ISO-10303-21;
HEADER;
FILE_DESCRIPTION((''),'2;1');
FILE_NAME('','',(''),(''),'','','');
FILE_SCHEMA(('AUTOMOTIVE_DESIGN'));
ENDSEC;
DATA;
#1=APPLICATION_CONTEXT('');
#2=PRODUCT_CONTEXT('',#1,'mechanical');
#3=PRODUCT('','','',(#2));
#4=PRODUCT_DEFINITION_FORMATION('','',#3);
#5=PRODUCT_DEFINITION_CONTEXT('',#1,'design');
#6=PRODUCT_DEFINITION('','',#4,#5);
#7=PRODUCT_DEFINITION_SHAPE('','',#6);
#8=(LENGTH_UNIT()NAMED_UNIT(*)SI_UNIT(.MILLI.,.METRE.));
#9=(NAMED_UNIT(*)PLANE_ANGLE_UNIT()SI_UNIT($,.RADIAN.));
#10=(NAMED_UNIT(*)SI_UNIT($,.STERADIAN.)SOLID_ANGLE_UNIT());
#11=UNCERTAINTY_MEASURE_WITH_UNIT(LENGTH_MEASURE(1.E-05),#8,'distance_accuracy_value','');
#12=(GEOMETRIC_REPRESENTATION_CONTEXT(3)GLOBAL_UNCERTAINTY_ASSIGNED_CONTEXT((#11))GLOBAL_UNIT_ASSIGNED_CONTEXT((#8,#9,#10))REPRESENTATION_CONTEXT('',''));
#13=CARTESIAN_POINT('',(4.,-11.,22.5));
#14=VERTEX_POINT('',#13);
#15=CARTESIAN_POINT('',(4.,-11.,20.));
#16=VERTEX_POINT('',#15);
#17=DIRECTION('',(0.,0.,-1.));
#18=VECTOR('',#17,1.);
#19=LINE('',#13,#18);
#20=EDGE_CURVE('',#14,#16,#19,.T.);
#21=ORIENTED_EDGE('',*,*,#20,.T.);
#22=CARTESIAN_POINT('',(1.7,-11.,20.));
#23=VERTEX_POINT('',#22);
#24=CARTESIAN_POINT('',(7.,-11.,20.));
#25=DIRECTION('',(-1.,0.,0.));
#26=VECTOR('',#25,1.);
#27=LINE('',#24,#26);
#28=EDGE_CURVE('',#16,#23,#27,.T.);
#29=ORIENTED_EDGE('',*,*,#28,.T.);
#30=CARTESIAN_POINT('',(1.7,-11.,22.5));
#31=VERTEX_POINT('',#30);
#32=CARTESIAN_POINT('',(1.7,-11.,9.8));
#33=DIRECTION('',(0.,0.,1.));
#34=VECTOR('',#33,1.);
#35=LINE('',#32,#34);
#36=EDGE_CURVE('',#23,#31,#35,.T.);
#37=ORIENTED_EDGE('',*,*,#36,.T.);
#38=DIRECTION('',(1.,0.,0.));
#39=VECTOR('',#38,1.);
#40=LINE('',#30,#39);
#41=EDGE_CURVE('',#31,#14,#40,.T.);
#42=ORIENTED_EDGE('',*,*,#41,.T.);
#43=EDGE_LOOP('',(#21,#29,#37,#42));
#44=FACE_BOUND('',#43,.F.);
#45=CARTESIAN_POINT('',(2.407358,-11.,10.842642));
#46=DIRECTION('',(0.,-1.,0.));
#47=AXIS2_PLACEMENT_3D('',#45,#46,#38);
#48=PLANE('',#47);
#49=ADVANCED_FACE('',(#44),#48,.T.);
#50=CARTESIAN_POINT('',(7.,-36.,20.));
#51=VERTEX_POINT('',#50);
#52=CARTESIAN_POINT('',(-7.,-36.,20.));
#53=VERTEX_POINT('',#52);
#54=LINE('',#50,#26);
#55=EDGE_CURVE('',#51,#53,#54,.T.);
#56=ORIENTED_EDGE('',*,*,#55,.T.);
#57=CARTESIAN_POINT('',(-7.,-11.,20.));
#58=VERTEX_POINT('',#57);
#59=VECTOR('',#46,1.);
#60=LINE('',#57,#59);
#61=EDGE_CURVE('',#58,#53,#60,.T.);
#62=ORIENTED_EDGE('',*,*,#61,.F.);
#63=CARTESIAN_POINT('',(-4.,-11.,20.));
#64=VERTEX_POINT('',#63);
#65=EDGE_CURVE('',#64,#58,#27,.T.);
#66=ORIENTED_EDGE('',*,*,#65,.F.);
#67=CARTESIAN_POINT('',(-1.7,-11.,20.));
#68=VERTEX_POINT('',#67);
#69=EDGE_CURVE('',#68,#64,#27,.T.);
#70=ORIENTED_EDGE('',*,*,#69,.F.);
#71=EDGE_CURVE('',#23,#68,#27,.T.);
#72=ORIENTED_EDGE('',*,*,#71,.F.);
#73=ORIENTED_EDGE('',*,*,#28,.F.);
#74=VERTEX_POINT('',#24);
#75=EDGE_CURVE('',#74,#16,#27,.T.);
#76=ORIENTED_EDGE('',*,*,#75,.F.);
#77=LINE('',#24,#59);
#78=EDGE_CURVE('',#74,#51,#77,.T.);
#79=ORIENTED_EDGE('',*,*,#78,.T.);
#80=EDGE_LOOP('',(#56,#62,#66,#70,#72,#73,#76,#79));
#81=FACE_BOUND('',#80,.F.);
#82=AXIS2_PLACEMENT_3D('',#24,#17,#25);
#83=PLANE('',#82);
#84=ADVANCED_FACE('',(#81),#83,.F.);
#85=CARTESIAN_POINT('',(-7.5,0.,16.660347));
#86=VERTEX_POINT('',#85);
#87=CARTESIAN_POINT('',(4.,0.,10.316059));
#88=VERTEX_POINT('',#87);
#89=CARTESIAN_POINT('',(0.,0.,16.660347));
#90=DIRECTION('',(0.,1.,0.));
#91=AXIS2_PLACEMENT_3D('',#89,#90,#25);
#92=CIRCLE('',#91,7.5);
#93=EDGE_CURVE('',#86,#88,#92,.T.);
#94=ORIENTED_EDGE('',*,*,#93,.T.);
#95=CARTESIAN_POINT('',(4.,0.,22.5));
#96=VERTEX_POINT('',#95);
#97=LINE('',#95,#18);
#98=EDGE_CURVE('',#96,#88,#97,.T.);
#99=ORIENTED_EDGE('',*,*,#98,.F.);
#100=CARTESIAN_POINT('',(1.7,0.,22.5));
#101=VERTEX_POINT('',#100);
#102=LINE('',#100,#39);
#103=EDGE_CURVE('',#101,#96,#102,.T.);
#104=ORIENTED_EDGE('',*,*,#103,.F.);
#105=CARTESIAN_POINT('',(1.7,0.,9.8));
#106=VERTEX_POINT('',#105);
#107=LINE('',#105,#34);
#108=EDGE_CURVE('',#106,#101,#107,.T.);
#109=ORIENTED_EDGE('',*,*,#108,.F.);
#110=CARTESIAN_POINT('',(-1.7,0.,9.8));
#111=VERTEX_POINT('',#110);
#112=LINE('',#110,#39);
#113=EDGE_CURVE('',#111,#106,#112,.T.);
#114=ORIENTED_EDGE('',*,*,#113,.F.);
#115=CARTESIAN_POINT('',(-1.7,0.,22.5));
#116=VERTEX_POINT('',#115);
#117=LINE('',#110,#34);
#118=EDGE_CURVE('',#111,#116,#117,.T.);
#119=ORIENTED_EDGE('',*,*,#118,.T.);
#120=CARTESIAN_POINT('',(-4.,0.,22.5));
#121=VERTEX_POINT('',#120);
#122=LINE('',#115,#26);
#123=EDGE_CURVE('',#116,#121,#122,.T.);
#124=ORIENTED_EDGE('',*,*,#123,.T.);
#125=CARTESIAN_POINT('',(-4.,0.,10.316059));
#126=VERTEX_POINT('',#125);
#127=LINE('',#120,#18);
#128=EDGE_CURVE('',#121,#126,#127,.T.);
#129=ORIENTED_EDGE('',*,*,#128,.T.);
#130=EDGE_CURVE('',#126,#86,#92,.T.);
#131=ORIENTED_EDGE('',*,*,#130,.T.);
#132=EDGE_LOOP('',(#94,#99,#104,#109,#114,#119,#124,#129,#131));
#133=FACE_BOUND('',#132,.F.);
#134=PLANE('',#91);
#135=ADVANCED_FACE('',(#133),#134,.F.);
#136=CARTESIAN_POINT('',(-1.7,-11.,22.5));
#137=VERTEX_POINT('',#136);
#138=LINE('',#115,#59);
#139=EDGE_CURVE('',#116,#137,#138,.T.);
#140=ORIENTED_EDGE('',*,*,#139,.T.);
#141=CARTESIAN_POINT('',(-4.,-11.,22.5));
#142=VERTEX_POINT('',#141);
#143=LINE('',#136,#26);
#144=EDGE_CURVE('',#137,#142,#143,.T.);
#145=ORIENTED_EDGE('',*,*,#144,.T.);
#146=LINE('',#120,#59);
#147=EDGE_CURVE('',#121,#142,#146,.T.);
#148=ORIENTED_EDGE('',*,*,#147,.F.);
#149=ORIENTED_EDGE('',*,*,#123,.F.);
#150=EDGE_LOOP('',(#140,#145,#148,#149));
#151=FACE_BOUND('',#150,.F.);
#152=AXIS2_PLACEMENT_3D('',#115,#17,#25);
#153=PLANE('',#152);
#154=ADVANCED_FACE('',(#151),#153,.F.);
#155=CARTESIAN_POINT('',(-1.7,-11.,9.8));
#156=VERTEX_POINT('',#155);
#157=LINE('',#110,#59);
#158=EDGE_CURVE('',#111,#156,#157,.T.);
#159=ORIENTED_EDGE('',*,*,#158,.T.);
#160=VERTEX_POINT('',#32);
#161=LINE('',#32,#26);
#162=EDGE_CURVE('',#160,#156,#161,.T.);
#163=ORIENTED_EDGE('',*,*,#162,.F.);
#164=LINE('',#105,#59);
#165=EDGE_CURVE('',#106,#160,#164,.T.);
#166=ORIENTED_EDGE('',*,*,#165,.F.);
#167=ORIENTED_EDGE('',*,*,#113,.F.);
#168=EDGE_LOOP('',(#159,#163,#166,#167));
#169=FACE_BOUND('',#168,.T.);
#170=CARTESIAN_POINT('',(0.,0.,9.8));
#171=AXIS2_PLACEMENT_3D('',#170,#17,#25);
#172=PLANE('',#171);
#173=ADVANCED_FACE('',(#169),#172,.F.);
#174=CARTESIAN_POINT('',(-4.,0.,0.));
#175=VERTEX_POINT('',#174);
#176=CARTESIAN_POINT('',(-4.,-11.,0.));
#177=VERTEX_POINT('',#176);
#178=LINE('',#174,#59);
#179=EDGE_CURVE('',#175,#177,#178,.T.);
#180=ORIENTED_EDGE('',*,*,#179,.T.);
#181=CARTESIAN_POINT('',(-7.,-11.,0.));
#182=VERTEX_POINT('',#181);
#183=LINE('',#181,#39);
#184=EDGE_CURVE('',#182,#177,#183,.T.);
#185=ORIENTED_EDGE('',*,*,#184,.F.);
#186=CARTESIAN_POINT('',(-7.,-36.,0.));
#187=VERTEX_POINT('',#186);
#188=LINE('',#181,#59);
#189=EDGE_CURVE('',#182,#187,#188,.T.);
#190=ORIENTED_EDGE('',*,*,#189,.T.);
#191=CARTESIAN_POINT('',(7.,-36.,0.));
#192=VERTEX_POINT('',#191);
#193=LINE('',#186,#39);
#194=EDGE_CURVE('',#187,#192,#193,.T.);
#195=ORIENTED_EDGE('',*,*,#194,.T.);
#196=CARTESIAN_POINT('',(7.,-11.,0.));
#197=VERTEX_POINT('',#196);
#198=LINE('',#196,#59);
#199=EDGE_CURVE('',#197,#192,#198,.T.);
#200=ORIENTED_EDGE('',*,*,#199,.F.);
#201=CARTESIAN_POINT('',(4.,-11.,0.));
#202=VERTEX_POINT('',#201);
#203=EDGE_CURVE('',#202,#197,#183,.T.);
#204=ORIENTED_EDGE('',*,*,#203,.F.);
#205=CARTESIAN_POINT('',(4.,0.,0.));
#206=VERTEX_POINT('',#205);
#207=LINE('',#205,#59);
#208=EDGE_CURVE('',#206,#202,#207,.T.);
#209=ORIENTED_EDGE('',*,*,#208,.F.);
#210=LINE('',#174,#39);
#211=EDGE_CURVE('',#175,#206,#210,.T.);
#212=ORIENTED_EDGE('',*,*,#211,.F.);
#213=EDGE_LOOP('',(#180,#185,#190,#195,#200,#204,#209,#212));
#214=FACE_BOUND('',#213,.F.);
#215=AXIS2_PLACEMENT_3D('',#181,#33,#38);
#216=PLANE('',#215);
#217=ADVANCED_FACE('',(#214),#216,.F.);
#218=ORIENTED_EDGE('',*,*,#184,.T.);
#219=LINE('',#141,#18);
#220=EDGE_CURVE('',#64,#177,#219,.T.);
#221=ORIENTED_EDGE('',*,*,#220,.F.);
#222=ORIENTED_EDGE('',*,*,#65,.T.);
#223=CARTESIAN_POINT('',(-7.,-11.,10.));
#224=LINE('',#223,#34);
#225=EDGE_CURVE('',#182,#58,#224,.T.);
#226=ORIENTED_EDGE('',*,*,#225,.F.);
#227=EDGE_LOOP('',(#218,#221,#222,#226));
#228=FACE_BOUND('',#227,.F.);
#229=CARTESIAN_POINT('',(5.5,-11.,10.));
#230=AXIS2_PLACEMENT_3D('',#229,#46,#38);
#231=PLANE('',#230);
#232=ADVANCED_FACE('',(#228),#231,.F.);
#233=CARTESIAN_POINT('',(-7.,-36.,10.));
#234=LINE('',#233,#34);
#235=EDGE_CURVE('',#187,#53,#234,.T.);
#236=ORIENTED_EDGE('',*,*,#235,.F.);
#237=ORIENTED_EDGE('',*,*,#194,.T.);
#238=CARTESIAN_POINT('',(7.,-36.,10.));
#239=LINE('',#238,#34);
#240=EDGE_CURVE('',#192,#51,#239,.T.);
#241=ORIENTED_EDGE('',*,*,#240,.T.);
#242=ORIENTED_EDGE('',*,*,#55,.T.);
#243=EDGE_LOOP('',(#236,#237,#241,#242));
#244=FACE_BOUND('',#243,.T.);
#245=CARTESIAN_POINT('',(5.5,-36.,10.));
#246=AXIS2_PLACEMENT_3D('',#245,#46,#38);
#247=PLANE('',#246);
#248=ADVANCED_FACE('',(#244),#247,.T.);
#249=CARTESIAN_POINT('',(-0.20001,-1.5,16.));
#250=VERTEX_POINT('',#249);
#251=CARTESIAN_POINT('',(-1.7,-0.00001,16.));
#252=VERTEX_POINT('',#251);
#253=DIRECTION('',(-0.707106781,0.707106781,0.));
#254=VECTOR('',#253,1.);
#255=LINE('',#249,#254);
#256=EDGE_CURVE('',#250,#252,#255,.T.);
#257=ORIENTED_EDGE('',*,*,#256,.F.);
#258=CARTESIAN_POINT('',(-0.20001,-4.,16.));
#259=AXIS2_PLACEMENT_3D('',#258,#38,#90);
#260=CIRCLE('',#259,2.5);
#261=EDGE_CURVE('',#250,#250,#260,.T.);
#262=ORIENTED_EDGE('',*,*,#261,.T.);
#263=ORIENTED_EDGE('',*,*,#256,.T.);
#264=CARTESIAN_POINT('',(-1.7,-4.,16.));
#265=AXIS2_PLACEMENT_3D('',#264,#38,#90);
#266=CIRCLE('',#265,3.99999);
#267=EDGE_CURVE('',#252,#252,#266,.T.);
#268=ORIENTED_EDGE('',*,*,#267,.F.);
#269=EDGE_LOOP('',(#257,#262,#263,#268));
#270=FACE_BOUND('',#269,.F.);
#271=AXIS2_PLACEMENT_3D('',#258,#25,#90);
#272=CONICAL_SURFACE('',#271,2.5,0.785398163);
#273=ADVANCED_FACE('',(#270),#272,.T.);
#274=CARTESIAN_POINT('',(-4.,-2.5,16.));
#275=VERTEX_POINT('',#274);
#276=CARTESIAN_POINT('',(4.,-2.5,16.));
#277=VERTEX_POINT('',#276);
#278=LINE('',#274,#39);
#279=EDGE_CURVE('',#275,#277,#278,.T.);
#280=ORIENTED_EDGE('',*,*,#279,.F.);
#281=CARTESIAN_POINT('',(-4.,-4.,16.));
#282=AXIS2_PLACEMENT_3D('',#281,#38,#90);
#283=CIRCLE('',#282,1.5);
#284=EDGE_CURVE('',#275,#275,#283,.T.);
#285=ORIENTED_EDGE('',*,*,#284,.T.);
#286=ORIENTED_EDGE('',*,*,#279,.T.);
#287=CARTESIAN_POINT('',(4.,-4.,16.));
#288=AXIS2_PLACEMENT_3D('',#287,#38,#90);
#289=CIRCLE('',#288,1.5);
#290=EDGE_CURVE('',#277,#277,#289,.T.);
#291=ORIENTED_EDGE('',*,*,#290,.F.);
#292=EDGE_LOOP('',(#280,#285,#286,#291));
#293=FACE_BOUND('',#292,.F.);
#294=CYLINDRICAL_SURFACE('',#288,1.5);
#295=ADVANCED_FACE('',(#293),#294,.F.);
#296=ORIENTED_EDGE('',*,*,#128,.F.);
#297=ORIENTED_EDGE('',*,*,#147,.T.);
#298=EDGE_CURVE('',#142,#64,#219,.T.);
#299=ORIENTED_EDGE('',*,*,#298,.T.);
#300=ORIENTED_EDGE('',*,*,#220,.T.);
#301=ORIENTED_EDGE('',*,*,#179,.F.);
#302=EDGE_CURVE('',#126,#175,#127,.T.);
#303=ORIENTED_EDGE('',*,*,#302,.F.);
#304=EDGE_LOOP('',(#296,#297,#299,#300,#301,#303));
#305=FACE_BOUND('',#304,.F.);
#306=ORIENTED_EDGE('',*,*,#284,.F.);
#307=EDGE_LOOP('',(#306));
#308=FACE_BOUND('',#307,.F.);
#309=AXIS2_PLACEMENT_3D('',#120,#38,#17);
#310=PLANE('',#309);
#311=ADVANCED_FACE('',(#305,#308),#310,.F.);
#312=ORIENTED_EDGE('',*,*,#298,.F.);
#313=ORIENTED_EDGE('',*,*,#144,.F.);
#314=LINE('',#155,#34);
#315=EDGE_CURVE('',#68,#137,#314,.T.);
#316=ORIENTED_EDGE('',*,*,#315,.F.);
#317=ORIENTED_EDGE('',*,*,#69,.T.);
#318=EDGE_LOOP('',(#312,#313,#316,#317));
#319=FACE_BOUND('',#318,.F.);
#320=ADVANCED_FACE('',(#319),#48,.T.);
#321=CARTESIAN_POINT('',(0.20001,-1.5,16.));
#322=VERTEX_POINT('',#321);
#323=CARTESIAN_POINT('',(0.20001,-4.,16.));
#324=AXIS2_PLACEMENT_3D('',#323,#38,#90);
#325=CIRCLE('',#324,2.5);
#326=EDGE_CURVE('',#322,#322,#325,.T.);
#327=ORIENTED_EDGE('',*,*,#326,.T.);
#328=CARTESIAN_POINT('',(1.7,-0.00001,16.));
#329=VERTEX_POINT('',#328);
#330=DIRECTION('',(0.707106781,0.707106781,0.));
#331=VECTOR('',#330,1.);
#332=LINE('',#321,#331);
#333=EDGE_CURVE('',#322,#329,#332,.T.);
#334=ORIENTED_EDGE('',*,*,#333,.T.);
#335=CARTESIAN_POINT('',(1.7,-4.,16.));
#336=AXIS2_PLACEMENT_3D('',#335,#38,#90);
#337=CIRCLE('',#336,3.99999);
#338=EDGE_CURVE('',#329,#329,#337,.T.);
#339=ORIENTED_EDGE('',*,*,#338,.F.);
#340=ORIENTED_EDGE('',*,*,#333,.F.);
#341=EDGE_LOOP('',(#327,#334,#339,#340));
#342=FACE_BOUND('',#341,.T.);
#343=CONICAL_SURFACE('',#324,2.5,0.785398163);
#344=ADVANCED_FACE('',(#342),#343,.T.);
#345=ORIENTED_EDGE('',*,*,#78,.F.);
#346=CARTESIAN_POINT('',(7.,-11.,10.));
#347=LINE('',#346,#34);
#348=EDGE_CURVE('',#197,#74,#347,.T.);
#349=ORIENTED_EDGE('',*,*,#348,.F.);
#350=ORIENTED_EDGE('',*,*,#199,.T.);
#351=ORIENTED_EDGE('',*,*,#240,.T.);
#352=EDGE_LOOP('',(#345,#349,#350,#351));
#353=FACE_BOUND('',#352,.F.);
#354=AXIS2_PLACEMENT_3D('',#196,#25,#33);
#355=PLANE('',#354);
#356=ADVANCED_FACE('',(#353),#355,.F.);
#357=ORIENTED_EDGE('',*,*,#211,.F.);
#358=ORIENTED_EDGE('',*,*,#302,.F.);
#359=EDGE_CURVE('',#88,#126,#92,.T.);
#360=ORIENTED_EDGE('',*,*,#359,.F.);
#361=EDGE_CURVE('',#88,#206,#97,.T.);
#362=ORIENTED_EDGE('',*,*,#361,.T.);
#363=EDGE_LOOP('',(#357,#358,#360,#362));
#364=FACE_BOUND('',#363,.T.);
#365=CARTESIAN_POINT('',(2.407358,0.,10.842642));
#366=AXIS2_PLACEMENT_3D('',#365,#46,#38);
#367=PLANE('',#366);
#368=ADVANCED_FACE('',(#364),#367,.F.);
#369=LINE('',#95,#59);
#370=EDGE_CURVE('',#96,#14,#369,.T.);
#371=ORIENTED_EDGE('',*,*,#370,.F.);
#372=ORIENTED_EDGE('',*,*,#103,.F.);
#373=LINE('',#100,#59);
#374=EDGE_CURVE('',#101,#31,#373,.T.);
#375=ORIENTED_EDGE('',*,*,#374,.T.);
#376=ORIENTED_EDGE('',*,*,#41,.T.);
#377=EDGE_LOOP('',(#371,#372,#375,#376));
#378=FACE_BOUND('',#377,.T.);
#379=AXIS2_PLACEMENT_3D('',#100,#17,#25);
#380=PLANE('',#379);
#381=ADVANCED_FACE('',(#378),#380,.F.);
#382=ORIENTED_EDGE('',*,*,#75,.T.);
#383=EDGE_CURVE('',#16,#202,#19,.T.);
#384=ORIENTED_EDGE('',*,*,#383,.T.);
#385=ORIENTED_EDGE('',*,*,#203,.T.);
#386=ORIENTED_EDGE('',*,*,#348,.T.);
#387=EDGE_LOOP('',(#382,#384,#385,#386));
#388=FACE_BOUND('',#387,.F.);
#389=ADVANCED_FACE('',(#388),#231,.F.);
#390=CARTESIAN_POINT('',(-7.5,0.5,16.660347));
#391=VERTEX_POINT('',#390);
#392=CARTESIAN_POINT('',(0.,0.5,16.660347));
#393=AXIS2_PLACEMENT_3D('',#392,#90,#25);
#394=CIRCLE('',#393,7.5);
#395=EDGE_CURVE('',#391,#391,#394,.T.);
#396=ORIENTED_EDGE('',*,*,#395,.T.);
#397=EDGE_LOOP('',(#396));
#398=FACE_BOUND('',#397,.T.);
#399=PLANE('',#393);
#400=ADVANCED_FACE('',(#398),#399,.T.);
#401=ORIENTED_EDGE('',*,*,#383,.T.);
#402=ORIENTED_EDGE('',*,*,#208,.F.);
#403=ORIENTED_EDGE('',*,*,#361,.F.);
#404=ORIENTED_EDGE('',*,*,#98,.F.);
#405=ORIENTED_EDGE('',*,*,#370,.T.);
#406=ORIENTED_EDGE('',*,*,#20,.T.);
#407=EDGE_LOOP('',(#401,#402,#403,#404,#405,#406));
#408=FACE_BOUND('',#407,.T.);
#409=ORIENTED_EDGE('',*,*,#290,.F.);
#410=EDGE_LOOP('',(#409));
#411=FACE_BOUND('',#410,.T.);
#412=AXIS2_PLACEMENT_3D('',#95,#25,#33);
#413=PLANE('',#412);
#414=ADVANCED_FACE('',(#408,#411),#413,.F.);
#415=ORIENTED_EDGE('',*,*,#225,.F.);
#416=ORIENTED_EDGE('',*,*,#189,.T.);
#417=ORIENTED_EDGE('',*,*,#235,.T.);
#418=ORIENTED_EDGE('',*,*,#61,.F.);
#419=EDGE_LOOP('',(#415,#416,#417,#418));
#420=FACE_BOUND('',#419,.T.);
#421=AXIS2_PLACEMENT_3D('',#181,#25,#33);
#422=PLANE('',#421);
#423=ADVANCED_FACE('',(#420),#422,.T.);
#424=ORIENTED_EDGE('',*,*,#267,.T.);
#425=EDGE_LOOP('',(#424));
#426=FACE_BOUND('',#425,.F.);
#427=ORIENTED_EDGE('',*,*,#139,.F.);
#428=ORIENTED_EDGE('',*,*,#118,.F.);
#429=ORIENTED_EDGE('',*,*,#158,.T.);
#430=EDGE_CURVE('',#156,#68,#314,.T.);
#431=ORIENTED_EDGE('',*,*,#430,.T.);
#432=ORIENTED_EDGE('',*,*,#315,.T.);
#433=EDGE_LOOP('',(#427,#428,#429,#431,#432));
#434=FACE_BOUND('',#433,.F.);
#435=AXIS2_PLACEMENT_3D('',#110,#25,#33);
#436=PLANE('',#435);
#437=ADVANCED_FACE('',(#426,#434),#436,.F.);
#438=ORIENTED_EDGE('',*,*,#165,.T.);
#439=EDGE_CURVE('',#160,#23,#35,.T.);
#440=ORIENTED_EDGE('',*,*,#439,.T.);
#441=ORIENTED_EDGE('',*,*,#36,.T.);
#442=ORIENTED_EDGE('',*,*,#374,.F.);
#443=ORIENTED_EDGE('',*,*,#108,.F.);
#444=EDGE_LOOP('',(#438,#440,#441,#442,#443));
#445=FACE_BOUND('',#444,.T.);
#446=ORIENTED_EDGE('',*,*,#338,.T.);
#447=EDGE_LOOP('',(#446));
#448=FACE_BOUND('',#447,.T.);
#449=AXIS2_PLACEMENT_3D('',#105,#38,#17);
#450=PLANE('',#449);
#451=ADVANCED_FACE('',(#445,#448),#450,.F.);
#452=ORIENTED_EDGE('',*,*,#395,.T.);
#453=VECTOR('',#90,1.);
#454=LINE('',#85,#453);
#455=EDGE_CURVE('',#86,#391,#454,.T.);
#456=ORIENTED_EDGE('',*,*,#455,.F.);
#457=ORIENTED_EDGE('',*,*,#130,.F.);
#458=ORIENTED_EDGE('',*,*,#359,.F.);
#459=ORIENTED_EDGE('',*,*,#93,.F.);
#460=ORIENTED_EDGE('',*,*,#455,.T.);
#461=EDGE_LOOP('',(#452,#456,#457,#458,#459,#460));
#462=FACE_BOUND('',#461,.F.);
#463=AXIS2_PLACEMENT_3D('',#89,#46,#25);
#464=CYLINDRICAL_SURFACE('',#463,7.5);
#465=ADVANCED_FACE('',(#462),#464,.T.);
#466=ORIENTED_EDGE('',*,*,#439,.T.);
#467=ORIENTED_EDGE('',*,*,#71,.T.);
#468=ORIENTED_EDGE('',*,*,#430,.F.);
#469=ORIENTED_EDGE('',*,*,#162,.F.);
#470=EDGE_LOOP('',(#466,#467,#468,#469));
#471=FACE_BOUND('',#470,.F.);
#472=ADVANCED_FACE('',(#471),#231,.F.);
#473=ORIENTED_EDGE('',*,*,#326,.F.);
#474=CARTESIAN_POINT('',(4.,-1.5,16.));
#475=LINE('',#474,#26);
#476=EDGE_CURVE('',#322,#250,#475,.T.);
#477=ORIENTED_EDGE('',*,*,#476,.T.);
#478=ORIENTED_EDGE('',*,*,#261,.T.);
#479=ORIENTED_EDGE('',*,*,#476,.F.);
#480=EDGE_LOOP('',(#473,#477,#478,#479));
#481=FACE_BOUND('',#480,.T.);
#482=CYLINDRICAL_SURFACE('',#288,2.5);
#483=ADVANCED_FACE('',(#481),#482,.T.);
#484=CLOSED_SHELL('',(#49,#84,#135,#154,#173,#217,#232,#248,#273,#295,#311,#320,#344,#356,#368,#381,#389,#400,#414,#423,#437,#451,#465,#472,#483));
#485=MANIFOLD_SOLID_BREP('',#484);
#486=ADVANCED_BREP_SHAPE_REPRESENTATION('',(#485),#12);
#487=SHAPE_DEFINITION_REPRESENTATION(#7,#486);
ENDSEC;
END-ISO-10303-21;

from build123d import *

# Parameters (mm, degrees)
F1_DEPTH  = 11
F3_W      = 3
F3_H      = 20
F3_W_2    = 3.4
F3_H_2    = 10.2
F4_DEPTH  = 25
F5_R      = 1.5
F6_DEPTH  = 25
F5_R_2    = 2.5
F7_DEPTH  = 8
F8_SIZE   = 1.49999
F9_SIZE   = 1.49999
F10_R     = 7.5
F12_DEPTH = 0.5


# Not quite as in the source:
# - a fillet or chamfer is up to 0.001 mm smaller than in the source, because OpenCascade refuses the exact size


with BuildPart() as f1:
    # F0 (on Front) → F1 (new body)
    with BuildSketch(Plane.XZ):
        Polygon((-4, 0), (0, 0), (0, 9.8), (-1.7, 9.8), (-1.7, 22.5), (-4, 22.5), align=None)
    extrude(amount=F1_DEPTH)

    # F2: F1 across face


with BuildPart() as f1_1:
    add(f1.part)
    add(f1.part.mirror(Plane(origin=(0, -5.5, 4.9), x_dir=(0, 1, 0), z_dir=(1, 0, 0))))

    # F3 (on face) → F4 (join)
    with BuildSketch(Plane.XZ.offset(11)):
        with Locations((5.5, 10)):
            Rectangle(F3_W, F3_H)
        with Locations((0, 14.9)):
            Rectangle(F3_W_2, F3_H_2)
        Polygon((-4, 0), (0, 0), (4, 0), (4, 20), (1.7, 20), (1.7, 9.8), (-1.7, 9.8), (-1.7, 20), (-4, 20), align=None)
        with Locations((-5.5, 10)):
            Rectangle(F3_W, F3_H)
    extrude(amount=F4_DEPTH)

    # F5 (on face) → F6 (cut)
    with BuildSketch(Plane.YZ.offset(4)):
        with Locations((-4, 16)):
            Circle(F5_R)
    extrude(amount=-F6_DEPTH, mode=Mode.SUBTRACT)

    # F5 (on face) → F7 (join, through all)
    with BuildSketch(Plane.YZ.offset(4)):
        with Locations((-4, 16)):
            Circle(F5_R_2)
        with Locations((-4, 16)):
            Circle(F5_R, mode=Mode.SUBTRACT)
    extrude(amount=-F7_DEPTH)

    # F8 (size 1.5 in the source; OpenCascade refuses exactly that, so slightly less here)
    f8_edges = [f1_1.edges().sort_by_distance(p)[0] for p in [
        (-1.7, -6.5, 16),
    ]]
    chamfer(f8_edges, length=F8_SIZE)

    # F9 (size 1.5 in the source; OpenCascade refuses exactly that, so slightly less here)
    f9_edges = [f1_1.edges().sort_by_distance(p)[0] for p in [
        (1.7, -6.5, 16),
    ]]
    chamfer(f9_edges, length=F9_SIZE)

    # F10 (on face) → F12 (join)
    with BuildSketch(Plane(origin=(0, 0, 0), x_dir=(-1, 0, 0), z_dir=(0, 1, 0))):
        with Locations((0, 16.6603474262)):
            Circle(F10_R)
    extrude(amount=F12_DEPTH)


solid = f1_1.part
